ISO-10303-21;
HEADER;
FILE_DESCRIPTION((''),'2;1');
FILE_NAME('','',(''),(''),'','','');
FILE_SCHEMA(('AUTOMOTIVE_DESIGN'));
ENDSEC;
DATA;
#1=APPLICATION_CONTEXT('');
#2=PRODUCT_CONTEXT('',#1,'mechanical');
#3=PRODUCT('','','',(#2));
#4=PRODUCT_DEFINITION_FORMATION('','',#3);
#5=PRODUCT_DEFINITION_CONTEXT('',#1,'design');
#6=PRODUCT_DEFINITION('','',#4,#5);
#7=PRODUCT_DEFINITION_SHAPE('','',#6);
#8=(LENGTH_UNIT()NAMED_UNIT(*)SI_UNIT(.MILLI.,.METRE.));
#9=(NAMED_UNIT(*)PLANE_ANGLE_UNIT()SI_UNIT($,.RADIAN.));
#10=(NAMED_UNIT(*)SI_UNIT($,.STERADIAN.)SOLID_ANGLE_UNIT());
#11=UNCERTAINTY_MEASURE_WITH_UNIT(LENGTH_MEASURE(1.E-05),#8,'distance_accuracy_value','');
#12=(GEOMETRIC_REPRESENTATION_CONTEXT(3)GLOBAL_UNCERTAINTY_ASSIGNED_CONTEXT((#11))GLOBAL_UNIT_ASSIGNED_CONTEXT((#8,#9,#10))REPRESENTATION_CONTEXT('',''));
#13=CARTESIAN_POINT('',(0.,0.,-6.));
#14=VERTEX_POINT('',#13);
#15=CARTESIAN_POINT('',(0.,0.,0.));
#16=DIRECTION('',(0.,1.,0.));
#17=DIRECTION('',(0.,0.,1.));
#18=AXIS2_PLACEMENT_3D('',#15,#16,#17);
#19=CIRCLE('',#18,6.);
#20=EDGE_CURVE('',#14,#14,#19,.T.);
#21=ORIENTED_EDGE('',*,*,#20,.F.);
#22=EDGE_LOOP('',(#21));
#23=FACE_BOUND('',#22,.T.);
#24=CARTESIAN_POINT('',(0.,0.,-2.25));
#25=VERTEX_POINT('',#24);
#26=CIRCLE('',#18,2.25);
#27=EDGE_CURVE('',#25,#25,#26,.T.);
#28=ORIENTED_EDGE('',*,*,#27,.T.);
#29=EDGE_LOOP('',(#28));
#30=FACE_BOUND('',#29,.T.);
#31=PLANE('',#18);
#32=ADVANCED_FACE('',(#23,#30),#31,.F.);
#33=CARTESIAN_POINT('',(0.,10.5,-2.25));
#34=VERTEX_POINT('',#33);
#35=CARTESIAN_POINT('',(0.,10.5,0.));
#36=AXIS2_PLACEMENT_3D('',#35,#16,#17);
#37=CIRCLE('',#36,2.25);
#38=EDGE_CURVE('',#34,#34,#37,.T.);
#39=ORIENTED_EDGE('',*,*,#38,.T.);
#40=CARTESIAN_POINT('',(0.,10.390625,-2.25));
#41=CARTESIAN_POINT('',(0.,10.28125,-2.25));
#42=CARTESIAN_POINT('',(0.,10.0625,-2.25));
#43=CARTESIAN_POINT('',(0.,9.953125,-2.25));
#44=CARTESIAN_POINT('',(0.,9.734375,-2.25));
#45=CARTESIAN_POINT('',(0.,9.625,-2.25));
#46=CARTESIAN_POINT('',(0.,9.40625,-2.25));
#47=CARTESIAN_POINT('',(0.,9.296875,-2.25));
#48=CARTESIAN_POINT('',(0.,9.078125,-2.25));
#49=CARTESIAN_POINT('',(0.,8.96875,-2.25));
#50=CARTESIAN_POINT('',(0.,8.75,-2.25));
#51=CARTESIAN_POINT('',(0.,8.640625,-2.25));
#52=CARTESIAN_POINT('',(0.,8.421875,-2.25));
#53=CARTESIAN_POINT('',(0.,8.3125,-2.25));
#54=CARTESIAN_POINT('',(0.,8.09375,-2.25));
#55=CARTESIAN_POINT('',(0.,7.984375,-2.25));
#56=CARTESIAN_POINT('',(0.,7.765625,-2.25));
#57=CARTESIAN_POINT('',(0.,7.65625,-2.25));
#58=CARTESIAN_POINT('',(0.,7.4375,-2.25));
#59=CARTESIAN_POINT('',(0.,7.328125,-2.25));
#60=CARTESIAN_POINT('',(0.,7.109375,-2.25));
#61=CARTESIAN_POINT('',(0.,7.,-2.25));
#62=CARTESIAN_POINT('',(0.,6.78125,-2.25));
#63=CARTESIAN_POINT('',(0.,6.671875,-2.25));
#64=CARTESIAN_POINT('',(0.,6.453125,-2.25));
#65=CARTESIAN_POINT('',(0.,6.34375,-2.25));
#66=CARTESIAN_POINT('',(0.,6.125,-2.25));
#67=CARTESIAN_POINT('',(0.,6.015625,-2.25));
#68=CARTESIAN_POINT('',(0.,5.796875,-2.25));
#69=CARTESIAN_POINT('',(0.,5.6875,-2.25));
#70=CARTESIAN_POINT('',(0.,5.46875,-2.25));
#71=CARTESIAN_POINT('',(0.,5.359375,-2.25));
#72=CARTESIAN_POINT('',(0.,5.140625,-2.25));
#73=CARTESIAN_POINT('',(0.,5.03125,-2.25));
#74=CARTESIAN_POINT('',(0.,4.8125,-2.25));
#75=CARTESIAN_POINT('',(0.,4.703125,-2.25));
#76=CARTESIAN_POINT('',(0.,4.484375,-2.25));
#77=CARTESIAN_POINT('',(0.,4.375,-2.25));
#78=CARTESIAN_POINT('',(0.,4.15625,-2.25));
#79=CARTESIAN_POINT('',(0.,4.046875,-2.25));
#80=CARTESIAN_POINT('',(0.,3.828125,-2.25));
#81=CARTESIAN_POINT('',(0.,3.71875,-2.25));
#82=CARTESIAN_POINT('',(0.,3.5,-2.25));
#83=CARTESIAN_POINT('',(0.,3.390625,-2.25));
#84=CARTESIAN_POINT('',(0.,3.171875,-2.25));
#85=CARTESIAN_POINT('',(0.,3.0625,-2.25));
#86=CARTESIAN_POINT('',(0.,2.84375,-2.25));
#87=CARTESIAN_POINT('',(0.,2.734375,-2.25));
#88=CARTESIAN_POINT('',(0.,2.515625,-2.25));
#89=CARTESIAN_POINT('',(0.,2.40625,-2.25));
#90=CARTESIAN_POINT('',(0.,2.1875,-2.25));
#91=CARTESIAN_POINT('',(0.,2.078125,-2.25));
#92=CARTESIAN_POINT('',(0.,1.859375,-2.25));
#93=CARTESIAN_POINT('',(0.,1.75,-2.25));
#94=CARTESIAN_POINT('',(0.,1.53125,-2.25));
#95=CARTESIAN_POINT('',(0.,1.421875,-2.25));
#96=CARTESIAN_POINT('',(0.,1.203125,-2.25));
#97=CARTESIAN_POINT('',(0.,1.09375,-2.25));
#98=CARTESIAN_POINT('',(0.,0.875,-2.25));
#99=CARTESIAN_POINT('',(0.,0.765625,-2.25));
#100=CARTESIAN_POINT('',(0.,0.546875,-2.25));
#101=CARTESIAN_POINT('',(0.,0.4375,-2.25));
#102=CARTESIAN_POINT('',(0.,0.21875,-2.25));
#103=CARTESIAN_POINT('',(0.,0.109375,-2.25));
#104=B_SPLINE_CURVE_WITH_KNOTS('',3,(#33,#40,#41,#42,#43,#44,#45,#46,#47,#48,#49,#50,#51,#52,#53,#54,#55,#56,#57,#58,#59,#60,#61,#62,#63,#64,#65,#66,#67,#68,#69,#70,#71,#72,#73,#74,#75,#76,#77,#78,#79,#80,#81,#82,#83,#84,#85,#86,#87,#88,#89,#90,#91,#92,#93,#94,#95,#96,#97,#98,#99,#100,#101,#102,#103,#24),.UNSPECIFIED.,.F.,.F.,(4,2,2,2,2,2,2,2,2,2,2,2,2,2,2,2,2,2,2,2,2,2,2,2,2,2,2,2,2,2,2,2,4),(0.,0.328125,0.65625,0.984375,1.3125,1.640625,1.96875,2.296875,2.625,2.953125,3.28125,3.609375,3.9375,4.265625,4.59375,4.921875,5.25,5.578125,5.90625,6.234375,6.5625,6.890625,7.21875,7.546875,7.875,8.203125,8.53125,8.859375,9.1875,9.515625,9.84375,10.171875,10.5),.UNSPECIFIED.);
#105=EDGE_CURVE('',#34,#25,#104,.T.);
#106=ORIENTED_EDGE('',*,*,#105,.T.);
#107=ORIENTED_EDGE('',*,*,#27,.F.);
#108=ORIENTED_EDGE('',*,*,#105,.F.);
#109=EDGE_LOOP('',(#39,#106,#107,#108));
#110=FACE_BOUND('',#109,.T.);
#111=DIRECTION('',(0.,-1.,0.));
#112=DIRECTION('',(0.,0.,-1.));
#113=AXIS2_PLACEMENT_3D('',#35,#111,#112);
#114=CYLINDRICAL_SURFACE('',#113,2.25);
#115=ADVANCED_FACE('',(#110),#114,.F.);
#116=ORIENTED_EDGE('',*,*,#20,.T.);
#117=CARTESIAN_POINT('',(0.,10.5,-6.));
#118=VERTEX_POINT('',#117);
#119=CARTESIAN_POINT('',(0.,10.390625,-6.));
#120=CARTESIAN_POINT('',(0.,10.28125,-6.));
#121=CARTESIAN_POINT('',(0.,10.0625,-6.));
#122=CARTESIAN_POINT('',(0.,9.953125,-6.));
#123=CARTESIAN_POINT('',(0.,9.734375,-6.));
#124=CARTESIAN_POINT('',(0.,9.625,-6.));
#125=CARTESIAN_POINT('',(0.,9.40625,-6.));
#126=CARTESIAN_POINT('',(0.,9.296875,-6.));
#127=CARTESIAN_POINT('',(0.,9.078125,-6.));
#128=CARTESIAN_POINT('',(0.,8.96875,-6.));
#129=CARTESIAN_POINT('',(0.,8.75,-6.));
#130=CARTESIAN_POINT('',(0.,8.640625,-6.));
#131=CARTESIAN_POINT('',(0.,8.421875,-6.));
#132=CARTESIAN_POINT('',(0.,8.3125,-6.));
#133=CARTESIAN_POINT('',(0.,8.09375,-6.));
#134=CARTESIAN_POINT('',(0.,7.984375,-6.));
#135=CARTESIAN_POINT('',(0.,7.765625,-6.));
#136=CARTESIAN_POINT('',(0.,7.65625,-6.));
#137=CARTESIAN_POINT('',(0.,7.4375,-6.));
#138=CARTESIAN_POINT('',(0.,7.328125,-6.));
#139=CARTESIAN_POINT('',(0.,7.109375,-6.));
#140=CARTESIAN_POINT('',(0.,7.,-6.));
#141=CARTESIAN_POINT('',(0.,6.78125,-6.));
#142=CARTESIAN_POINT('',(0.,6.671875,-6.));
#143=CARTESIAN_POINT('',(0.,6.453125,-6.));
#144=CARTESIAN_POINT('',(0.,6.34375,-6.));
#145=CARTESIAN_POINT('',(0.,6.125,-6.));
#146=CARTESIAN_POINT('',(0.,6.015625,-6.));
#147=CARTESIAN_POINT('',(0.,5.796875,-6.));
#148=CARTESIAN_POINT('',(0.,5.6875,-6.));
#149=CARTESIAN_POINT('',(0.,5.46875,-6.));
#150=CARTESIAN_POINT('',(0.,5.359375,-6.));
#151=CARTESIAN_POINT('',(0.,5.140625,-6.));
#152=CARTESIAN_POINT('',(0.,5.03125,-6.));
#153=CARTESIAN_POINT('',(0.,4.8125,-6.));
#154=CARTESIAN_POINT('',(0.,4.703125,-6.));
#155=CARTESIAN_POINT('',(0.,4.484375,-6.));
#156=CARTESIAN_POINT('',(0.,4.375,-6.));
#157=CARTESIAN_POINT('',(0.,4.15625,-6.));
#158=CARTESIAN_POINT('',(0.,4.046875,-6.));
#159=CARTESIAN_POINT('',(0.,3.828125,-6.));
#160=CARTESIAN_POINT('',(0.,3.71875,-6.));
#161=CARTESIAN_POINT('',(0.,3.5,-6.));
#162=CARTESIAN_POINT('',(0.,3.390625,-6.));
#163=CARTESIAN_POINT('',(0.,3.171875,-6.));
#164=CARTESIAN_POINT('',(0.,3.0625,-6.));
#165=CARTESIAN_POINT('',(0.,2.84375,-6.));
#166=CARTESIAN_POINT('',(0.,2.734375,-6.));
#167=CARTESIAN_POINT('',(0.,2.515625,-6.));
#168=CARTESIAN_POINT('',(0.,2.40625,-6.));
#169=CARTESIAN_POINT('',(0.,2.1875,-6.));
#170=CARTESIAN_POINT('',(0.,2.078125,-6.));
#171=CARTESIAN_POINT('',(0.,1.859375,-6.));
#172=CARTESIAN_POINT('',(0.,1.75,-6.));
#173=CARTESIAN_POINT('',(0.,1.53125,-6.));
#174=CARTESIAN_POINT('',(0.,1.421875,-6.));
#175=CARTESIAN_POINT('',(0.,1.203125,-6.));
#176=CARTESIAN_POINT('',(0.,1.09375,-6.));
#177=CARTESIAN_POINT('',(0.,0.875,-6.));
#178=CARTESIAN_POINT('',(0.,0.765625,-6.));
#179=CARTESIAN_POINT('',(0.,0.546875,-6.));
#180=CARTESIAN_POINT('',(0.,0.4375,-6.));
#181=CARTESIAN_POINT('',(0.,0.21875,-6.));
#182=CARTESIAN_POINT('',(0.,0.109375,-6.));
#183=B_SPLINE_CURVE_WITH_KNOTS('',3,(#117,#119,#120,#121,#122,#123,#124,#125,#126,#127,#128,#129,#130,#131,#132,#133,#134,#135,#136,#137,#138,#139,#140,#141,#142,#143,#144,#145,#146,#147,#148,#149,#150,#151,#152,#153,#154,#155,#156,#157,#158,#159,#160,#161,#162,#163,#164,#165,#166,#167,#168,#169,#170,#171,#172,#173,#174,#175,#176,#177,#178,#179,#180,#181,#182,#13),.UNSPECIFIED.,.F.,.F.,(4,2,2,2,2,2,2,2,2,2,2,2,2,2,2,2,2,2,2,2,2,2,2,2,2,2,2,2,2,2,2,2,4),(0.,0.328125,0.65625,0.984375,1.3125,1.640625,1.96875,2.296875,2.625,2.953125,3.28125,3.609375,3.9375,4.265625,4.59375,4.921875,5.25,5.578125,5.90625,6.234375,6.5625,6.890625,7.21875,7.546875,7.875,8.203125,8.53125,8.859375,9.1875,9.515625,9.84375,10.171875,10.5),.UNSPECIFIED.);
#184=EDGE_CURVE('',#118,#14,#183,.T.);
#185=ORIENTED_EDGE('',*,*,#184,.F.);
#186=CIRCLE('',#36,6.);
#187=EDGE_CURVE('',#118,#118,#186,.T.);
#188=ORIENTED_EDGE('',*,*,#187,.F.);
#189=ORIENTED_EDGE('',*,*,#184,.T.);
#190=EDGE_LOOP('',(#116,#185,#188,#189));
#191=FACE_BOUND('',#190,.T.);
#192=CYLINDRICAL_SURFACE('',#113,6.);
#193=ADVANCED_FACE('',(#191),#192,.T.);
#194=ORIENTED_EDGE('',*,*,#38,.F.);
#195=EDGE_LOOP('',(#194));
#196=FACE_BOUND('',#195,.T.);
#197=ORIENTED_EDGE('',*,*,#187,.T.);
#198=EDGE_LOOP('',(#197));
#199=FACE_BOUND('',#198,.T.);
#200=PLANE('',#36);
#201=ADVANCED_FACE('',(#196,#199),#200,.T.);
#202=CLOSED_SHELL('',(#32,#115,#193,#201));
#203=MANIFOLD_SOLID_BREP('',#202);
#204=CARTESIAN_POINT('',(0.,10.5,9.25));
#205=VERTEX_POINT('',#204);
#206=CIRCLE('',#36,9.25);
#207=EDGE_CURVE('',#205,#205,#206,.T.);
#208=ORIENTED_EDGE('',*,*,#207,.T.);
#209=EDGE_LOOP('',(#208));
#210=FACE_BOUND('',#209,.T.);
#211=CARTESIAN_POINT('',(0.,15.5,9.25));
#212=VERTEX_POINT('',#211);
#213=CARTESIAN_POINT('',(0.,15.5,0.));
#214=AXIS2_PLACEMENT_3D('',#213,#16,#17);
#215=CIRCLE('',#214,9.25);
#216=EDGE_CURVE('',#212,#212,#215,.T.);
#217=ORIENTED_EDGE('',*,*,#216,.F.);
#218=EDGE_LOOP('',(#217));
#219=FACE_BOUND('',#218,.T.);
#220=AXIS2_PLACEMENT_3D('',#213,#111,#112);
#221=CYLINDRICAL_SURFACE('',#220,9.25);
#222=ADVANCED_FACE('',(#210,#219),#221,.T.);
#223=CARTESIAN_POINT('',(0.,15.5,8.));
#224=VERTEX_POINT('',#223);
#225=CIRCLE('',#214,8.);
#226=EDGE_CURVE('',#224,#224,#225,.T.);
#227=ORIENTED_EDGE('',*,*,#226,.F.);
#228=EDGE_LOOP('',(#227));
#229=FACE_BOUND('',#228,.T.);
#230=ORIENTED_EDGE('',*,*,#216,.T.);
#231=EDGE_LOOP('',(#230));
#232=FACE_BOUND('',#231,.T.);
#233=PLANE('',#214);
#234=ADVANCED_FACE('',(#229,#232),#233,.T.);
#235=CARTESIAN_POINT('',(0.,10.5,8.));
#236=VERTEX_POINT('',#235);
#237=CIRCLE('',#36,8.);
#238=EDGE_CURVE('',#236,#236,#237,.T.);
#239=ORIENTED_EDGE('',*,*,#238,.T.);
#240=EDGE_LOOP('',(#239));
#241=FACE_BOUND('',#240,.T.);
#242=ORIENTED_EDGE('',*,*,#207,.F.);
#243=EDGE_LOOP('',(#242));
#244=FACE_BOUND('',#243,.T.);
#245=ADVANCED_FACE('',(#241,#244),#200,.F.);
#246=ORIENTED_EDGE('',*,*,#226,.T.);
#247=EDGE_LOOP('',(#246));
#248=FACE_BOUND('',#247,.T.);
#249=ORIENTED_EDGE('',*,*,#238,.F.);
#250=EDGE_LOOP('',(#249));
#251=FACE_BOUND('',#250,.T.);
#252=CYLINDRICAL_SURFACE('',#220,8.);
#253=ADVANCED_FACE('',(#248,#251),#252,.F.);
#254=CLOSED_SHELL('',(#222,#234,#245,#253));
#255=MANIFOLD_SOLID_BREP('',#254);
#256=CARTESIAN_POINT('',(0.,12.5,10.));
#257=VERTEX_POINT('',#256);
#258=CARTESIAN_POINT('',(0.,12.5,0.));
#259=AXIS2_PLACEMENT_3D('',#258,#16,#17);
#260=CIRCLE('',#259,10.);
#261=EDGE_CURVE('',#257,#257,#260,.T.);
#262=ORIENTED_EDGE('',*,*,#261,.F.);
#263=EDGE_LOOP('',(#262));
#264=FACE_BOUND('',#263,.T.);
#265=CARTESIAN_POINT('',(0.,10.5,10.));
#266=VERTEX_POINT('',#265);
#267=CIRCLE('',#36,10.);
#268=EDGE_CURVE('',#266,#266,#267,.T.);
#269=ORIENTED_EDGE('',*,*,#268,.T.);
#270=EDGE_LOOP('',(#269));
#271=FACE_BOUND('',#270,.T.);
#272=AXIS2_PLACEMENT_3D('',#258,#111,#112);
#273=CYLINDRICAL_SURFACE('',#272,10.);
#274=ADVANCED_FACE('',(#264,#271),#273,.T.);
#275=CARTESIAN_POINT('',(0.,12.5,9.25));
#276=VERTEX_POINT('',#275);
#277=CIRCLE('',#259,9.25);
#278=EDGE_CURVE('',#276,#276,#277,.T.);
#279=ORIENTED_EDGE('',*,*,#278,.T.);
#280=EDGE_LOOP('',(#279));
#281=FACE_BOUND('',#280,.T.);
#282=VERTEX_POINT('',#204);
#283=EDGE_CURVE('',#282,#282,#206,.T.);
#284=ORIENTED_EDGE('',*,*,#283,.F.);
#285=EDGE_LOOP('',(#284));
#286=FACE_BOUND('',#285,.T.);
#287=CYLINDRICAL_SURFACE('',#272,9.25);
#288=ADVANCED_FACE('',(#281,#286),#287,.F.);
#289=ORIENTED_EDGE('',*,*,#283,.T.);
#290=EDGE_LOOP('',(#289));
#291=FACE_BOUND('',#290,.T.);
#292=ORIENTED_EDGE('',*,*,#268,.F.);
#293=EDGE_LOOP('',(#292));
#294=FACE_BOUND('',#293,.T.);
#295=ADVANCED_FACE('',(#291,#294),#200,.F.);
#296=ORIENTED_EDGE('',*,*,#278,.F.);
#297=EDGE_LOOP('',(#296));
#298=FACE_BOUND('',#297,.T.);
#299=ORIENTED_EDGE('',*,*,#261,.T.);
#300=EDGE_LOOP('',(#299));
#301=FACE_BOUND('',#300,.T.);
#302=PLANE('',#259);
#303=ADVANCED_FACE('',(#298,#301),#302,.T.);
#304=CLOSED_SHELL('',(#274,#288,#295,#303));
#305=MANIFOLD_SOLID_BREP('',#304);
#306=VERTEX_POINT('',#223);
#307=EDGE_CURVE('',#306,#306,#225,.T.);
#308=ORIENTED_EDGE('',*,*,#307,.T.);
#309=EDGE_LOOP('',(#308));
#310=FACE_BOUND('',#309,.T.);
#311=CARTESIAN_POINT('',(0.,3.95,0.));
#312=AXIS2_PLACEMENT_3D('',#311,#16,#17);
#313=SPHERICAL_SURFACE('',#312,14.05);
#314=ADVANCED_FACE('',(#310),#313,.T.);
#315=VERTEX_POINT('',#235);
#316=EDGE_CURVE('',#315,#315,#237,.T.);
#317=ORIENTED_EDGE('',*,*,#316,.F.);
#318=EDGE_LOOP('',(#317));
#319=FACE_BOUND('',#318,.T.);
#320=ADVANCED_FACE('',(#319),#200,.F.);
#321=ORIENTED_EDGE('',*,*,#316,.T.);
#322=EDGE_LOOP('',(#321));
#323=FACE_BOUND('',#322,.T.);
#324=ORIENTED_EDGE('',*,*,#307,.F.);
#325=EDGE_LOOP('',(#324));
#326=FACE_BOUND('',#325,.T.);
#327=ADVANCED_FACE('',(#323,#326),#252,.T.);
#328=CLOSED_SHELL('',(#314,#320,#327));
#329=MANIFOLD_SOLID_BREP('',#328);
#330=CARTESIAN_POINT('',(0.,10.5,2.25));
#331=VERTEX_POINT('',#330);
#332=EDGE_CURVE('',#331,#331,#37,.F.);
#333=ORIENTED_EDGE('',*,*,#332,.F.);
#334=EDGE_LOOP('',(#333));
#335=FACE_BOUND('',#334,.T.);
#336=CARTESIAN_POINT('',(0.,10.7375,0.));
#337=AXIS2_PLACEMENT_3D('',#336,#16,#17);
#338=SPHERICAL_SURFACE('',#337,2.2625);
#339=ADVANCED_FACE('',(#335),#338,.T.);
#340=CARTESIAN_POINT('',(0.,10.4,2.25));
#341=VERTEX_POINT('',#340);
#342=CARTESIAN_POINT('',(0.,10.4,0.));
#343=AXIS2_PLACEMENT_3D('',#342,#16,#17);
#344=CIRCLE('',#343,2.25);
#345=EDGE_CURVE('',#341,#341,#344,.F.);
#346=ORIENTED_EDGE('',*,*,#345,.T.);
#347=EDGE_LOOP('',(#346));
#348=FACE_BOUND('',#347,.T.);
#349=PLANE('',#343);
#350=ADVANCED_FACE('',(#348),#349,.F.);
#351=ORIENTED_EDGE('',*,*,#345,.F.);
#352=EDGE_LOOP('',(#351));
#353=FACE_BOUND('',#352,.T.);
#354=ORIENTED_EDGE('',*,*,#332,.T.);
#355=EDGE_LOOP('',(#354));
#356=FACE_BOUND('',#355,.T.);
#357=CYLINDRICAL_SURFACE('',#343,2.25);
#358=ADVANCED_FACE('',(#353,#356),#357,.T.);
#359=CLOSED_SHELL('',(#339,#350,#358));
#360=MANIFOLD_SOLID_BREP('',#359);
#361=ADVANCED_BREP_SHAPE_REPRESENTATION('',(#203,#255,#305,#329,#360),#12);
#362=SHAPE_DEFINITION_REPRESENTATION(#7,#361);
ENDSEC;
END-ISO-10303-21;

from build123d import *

# Parameters (mm, degrees)
SKETCH1_R           = 6
SKETCH1_R_2         = 2.25
BOSS_EXTRUDE1_DEPTH = 10.5
SKETCH2_R           = 9.25
SKETCH2_R_2         = 8
BOSS_EXTRUDE2_DEPTH = 5
SKETCH2_6_R         = 8
SKETCH2_6_R_2       = 6
SKETCH2_6_R_3       = 2.25
BOSS_EXTRUDE4_DEPTH = 5
SKETCH2_8_R         = 2.25
BOSS_EXTRUDE7_DEPTH = 0.1
SKETCH2_10_R        = 10
SKETCH2_10_R_2      = 9.25
BOSS_EXTRUDE8_DEPTH = 2
DOME2_FACE_RADIUS   = 2.25
DOME2_HEIGHT        = 2.5
DOME1_FACE_RADIUS   = 8
DOME1_HEIGHT        = 2.5


with BuildPart() as part:
    # Sketch1 → Boss-Extrude1 (new body)
    with BuildSketch(Plane(origin=(0, 0, 0), x_dir=(1, 0, 0), z_dir=(0, 1, 0))):
        with Locations(Location((0, 0, 0), (0, 0, 90))):
            Circle(SKETCH1_R)
        with Locations(Location((0, 0, 0), (0, 0, 90))):
            Circle(SKETCH1_R_2, mode=Mode.SUBTRACT)
    extrude(amount=BOSS_EXTRUDE1_DEPTH)


with BuildPart() as body_2:
    # Sketch2 → Boss-Extrude2 (new body)
    with BuildSketch(Plane(origin=(0, 10.5, 0), x_dir=(1, 0, 0), z_dir=(0, 1, 0))):
        with Locations(Location((0, 0, 0), (0, 0, 270))):
            Circle(SKETCH2_R)
        with Locations(Location((0, 0, 0), (0, 0, 270))):
            Circle(SKETCH2_R_2, mode=Mode.SUBTRACT)
    extrude(amount=BOSS_EXTRUDE2_DEPTH)


with BuildPart() as body_3:
    # Sketch2<6> → Boss-Extrude4 (new body)
    # profile 1 of 3: a face of its own
    with BuildSketch(Plane(origin=(0, 10.5, 0), x_dir=(1, 0, 0), z_dir=(0, 1, 0))):
        with Locations(Location((0, 0, 0), (0, 0, 270))):
            Circle(SKETCH2_6_R)
        with Locations(Location((0, 0, 0), (0, 0, 90))):
            Circle(SKETCH2_6_R_2, mode=Mode.SUBTRACT)
    # profile 2 of 3: a face of its own
    with BuildSketch(Plane(origin=(0, 10.5, 0), x_dir=(1, 0, 0), z_dir=(0, 1, 0))):
        with Locations(Location((0, 0, 0), (0, 0, 90))):
            Circle(SKETCH2_6_R_2)
        with Locations(Location((0, 0, 0), (0, 0, 90))):
            Circle(SKETCH2_6_R_3, mode=Mode.SUBTRACT)
    # profile 3 of 3: a face of its own
    with BuildSketch(Plane(origin=(0, 10.5, 0), x_dir=(1, 0, 0), z_dir=(0, 1, 0))):
        with Locations(Location((0, 0, 0), (0, 0, 90))):
            Circle(SKETCH2_6_R_3)
    extrude(amount=BOSS_EXTRUDE4_DEPTH)

    # Dome1: a dome of height H over a round flat face of radius A is a cap of a sphere of radius (A * A + H * H) / (2 * H)
    dome1_r = (DOME1_FACE_RADIUS * DOME1_FACE_RADIUS + DOME1_HEIGHT * DOME1_HEIGHT) / (2 * DOME1_HEIGHT)
    dome1_base = Plane((0, 15.5, 0), z_dir=(0, 1, 0))
    with Locations(dome1_base.offset(DOME1_HEIGHT - dome1_r)):
        dome1_ball = Sphere(dome1_r, mode=Mode.PRIVATE)
    add(split(dome1_ball, bisect_by=dome1_base, keep=Keep.TOP, mode=Mode.PRIVATE))


with BuildPart() as body_4:
    # Sketch2<8> → Boss-Extrude7 (new body)
    with BuildSketch(Plane(origin=(0, 10.5, 0), x_dir=(1, 0, 0), z_dir=(0, 1, 0))):
        with Locations(Location((0, 0, 0), (0, 0, 270))):
            Circle(SKETCH2_8_R)
    extrude(amount=-BOSS_EXTRUDE7_DEPTH)

    # Dome2: a dome of height H over a round flat face of radius A is a cap of a sphere of radius (A * A + H * H) / (2 * H)
    dome2_r = (DOME2_FACE_RADIUS * DOME2_FACE_RADIUS + DOME2_HEIGHT * DOME2_HEIGHT) / (2 * DOME2_HEIGHT)
    dome2_base = Plane((0, 10.5, 0), z_dir=(0, 1, 0))
    with Locations(dome2_base.offset(DOME2_HEIGHT - dome2_r)):
        dome2_ball = Sphere(dome2_r, mode=Mode.PRIVATE)
    add(split(dome2_ball, bisect_by=dome2_base, keep=Keep.TOP, mode=Mode.PRIVATE))


with BuildPart() as body_5:
    # Sketch2<10> → Boss-Extrude8 (new body)
    with BuildSketch(Plane(origin=(0, 10.5, 0), x_dir=(1, 0, 0), z_dir=(0, 1, 0))):
        with Locations(Location((0, 0, 0), (0, 0, 270))):
            Circle(SKETCH2_10_R)
        with Locations(Location((0, 0, 0), (0, 0, 270))):
            Circle(SKETCH2_10_R_2, mode=Mode.SUBTRACT)
    extrude(amount=BOSS_EXTRUDE8_DEPTH)


solid = Compound([part.part, body_2.part, body_3.part, body_4.part, body_5.part])
